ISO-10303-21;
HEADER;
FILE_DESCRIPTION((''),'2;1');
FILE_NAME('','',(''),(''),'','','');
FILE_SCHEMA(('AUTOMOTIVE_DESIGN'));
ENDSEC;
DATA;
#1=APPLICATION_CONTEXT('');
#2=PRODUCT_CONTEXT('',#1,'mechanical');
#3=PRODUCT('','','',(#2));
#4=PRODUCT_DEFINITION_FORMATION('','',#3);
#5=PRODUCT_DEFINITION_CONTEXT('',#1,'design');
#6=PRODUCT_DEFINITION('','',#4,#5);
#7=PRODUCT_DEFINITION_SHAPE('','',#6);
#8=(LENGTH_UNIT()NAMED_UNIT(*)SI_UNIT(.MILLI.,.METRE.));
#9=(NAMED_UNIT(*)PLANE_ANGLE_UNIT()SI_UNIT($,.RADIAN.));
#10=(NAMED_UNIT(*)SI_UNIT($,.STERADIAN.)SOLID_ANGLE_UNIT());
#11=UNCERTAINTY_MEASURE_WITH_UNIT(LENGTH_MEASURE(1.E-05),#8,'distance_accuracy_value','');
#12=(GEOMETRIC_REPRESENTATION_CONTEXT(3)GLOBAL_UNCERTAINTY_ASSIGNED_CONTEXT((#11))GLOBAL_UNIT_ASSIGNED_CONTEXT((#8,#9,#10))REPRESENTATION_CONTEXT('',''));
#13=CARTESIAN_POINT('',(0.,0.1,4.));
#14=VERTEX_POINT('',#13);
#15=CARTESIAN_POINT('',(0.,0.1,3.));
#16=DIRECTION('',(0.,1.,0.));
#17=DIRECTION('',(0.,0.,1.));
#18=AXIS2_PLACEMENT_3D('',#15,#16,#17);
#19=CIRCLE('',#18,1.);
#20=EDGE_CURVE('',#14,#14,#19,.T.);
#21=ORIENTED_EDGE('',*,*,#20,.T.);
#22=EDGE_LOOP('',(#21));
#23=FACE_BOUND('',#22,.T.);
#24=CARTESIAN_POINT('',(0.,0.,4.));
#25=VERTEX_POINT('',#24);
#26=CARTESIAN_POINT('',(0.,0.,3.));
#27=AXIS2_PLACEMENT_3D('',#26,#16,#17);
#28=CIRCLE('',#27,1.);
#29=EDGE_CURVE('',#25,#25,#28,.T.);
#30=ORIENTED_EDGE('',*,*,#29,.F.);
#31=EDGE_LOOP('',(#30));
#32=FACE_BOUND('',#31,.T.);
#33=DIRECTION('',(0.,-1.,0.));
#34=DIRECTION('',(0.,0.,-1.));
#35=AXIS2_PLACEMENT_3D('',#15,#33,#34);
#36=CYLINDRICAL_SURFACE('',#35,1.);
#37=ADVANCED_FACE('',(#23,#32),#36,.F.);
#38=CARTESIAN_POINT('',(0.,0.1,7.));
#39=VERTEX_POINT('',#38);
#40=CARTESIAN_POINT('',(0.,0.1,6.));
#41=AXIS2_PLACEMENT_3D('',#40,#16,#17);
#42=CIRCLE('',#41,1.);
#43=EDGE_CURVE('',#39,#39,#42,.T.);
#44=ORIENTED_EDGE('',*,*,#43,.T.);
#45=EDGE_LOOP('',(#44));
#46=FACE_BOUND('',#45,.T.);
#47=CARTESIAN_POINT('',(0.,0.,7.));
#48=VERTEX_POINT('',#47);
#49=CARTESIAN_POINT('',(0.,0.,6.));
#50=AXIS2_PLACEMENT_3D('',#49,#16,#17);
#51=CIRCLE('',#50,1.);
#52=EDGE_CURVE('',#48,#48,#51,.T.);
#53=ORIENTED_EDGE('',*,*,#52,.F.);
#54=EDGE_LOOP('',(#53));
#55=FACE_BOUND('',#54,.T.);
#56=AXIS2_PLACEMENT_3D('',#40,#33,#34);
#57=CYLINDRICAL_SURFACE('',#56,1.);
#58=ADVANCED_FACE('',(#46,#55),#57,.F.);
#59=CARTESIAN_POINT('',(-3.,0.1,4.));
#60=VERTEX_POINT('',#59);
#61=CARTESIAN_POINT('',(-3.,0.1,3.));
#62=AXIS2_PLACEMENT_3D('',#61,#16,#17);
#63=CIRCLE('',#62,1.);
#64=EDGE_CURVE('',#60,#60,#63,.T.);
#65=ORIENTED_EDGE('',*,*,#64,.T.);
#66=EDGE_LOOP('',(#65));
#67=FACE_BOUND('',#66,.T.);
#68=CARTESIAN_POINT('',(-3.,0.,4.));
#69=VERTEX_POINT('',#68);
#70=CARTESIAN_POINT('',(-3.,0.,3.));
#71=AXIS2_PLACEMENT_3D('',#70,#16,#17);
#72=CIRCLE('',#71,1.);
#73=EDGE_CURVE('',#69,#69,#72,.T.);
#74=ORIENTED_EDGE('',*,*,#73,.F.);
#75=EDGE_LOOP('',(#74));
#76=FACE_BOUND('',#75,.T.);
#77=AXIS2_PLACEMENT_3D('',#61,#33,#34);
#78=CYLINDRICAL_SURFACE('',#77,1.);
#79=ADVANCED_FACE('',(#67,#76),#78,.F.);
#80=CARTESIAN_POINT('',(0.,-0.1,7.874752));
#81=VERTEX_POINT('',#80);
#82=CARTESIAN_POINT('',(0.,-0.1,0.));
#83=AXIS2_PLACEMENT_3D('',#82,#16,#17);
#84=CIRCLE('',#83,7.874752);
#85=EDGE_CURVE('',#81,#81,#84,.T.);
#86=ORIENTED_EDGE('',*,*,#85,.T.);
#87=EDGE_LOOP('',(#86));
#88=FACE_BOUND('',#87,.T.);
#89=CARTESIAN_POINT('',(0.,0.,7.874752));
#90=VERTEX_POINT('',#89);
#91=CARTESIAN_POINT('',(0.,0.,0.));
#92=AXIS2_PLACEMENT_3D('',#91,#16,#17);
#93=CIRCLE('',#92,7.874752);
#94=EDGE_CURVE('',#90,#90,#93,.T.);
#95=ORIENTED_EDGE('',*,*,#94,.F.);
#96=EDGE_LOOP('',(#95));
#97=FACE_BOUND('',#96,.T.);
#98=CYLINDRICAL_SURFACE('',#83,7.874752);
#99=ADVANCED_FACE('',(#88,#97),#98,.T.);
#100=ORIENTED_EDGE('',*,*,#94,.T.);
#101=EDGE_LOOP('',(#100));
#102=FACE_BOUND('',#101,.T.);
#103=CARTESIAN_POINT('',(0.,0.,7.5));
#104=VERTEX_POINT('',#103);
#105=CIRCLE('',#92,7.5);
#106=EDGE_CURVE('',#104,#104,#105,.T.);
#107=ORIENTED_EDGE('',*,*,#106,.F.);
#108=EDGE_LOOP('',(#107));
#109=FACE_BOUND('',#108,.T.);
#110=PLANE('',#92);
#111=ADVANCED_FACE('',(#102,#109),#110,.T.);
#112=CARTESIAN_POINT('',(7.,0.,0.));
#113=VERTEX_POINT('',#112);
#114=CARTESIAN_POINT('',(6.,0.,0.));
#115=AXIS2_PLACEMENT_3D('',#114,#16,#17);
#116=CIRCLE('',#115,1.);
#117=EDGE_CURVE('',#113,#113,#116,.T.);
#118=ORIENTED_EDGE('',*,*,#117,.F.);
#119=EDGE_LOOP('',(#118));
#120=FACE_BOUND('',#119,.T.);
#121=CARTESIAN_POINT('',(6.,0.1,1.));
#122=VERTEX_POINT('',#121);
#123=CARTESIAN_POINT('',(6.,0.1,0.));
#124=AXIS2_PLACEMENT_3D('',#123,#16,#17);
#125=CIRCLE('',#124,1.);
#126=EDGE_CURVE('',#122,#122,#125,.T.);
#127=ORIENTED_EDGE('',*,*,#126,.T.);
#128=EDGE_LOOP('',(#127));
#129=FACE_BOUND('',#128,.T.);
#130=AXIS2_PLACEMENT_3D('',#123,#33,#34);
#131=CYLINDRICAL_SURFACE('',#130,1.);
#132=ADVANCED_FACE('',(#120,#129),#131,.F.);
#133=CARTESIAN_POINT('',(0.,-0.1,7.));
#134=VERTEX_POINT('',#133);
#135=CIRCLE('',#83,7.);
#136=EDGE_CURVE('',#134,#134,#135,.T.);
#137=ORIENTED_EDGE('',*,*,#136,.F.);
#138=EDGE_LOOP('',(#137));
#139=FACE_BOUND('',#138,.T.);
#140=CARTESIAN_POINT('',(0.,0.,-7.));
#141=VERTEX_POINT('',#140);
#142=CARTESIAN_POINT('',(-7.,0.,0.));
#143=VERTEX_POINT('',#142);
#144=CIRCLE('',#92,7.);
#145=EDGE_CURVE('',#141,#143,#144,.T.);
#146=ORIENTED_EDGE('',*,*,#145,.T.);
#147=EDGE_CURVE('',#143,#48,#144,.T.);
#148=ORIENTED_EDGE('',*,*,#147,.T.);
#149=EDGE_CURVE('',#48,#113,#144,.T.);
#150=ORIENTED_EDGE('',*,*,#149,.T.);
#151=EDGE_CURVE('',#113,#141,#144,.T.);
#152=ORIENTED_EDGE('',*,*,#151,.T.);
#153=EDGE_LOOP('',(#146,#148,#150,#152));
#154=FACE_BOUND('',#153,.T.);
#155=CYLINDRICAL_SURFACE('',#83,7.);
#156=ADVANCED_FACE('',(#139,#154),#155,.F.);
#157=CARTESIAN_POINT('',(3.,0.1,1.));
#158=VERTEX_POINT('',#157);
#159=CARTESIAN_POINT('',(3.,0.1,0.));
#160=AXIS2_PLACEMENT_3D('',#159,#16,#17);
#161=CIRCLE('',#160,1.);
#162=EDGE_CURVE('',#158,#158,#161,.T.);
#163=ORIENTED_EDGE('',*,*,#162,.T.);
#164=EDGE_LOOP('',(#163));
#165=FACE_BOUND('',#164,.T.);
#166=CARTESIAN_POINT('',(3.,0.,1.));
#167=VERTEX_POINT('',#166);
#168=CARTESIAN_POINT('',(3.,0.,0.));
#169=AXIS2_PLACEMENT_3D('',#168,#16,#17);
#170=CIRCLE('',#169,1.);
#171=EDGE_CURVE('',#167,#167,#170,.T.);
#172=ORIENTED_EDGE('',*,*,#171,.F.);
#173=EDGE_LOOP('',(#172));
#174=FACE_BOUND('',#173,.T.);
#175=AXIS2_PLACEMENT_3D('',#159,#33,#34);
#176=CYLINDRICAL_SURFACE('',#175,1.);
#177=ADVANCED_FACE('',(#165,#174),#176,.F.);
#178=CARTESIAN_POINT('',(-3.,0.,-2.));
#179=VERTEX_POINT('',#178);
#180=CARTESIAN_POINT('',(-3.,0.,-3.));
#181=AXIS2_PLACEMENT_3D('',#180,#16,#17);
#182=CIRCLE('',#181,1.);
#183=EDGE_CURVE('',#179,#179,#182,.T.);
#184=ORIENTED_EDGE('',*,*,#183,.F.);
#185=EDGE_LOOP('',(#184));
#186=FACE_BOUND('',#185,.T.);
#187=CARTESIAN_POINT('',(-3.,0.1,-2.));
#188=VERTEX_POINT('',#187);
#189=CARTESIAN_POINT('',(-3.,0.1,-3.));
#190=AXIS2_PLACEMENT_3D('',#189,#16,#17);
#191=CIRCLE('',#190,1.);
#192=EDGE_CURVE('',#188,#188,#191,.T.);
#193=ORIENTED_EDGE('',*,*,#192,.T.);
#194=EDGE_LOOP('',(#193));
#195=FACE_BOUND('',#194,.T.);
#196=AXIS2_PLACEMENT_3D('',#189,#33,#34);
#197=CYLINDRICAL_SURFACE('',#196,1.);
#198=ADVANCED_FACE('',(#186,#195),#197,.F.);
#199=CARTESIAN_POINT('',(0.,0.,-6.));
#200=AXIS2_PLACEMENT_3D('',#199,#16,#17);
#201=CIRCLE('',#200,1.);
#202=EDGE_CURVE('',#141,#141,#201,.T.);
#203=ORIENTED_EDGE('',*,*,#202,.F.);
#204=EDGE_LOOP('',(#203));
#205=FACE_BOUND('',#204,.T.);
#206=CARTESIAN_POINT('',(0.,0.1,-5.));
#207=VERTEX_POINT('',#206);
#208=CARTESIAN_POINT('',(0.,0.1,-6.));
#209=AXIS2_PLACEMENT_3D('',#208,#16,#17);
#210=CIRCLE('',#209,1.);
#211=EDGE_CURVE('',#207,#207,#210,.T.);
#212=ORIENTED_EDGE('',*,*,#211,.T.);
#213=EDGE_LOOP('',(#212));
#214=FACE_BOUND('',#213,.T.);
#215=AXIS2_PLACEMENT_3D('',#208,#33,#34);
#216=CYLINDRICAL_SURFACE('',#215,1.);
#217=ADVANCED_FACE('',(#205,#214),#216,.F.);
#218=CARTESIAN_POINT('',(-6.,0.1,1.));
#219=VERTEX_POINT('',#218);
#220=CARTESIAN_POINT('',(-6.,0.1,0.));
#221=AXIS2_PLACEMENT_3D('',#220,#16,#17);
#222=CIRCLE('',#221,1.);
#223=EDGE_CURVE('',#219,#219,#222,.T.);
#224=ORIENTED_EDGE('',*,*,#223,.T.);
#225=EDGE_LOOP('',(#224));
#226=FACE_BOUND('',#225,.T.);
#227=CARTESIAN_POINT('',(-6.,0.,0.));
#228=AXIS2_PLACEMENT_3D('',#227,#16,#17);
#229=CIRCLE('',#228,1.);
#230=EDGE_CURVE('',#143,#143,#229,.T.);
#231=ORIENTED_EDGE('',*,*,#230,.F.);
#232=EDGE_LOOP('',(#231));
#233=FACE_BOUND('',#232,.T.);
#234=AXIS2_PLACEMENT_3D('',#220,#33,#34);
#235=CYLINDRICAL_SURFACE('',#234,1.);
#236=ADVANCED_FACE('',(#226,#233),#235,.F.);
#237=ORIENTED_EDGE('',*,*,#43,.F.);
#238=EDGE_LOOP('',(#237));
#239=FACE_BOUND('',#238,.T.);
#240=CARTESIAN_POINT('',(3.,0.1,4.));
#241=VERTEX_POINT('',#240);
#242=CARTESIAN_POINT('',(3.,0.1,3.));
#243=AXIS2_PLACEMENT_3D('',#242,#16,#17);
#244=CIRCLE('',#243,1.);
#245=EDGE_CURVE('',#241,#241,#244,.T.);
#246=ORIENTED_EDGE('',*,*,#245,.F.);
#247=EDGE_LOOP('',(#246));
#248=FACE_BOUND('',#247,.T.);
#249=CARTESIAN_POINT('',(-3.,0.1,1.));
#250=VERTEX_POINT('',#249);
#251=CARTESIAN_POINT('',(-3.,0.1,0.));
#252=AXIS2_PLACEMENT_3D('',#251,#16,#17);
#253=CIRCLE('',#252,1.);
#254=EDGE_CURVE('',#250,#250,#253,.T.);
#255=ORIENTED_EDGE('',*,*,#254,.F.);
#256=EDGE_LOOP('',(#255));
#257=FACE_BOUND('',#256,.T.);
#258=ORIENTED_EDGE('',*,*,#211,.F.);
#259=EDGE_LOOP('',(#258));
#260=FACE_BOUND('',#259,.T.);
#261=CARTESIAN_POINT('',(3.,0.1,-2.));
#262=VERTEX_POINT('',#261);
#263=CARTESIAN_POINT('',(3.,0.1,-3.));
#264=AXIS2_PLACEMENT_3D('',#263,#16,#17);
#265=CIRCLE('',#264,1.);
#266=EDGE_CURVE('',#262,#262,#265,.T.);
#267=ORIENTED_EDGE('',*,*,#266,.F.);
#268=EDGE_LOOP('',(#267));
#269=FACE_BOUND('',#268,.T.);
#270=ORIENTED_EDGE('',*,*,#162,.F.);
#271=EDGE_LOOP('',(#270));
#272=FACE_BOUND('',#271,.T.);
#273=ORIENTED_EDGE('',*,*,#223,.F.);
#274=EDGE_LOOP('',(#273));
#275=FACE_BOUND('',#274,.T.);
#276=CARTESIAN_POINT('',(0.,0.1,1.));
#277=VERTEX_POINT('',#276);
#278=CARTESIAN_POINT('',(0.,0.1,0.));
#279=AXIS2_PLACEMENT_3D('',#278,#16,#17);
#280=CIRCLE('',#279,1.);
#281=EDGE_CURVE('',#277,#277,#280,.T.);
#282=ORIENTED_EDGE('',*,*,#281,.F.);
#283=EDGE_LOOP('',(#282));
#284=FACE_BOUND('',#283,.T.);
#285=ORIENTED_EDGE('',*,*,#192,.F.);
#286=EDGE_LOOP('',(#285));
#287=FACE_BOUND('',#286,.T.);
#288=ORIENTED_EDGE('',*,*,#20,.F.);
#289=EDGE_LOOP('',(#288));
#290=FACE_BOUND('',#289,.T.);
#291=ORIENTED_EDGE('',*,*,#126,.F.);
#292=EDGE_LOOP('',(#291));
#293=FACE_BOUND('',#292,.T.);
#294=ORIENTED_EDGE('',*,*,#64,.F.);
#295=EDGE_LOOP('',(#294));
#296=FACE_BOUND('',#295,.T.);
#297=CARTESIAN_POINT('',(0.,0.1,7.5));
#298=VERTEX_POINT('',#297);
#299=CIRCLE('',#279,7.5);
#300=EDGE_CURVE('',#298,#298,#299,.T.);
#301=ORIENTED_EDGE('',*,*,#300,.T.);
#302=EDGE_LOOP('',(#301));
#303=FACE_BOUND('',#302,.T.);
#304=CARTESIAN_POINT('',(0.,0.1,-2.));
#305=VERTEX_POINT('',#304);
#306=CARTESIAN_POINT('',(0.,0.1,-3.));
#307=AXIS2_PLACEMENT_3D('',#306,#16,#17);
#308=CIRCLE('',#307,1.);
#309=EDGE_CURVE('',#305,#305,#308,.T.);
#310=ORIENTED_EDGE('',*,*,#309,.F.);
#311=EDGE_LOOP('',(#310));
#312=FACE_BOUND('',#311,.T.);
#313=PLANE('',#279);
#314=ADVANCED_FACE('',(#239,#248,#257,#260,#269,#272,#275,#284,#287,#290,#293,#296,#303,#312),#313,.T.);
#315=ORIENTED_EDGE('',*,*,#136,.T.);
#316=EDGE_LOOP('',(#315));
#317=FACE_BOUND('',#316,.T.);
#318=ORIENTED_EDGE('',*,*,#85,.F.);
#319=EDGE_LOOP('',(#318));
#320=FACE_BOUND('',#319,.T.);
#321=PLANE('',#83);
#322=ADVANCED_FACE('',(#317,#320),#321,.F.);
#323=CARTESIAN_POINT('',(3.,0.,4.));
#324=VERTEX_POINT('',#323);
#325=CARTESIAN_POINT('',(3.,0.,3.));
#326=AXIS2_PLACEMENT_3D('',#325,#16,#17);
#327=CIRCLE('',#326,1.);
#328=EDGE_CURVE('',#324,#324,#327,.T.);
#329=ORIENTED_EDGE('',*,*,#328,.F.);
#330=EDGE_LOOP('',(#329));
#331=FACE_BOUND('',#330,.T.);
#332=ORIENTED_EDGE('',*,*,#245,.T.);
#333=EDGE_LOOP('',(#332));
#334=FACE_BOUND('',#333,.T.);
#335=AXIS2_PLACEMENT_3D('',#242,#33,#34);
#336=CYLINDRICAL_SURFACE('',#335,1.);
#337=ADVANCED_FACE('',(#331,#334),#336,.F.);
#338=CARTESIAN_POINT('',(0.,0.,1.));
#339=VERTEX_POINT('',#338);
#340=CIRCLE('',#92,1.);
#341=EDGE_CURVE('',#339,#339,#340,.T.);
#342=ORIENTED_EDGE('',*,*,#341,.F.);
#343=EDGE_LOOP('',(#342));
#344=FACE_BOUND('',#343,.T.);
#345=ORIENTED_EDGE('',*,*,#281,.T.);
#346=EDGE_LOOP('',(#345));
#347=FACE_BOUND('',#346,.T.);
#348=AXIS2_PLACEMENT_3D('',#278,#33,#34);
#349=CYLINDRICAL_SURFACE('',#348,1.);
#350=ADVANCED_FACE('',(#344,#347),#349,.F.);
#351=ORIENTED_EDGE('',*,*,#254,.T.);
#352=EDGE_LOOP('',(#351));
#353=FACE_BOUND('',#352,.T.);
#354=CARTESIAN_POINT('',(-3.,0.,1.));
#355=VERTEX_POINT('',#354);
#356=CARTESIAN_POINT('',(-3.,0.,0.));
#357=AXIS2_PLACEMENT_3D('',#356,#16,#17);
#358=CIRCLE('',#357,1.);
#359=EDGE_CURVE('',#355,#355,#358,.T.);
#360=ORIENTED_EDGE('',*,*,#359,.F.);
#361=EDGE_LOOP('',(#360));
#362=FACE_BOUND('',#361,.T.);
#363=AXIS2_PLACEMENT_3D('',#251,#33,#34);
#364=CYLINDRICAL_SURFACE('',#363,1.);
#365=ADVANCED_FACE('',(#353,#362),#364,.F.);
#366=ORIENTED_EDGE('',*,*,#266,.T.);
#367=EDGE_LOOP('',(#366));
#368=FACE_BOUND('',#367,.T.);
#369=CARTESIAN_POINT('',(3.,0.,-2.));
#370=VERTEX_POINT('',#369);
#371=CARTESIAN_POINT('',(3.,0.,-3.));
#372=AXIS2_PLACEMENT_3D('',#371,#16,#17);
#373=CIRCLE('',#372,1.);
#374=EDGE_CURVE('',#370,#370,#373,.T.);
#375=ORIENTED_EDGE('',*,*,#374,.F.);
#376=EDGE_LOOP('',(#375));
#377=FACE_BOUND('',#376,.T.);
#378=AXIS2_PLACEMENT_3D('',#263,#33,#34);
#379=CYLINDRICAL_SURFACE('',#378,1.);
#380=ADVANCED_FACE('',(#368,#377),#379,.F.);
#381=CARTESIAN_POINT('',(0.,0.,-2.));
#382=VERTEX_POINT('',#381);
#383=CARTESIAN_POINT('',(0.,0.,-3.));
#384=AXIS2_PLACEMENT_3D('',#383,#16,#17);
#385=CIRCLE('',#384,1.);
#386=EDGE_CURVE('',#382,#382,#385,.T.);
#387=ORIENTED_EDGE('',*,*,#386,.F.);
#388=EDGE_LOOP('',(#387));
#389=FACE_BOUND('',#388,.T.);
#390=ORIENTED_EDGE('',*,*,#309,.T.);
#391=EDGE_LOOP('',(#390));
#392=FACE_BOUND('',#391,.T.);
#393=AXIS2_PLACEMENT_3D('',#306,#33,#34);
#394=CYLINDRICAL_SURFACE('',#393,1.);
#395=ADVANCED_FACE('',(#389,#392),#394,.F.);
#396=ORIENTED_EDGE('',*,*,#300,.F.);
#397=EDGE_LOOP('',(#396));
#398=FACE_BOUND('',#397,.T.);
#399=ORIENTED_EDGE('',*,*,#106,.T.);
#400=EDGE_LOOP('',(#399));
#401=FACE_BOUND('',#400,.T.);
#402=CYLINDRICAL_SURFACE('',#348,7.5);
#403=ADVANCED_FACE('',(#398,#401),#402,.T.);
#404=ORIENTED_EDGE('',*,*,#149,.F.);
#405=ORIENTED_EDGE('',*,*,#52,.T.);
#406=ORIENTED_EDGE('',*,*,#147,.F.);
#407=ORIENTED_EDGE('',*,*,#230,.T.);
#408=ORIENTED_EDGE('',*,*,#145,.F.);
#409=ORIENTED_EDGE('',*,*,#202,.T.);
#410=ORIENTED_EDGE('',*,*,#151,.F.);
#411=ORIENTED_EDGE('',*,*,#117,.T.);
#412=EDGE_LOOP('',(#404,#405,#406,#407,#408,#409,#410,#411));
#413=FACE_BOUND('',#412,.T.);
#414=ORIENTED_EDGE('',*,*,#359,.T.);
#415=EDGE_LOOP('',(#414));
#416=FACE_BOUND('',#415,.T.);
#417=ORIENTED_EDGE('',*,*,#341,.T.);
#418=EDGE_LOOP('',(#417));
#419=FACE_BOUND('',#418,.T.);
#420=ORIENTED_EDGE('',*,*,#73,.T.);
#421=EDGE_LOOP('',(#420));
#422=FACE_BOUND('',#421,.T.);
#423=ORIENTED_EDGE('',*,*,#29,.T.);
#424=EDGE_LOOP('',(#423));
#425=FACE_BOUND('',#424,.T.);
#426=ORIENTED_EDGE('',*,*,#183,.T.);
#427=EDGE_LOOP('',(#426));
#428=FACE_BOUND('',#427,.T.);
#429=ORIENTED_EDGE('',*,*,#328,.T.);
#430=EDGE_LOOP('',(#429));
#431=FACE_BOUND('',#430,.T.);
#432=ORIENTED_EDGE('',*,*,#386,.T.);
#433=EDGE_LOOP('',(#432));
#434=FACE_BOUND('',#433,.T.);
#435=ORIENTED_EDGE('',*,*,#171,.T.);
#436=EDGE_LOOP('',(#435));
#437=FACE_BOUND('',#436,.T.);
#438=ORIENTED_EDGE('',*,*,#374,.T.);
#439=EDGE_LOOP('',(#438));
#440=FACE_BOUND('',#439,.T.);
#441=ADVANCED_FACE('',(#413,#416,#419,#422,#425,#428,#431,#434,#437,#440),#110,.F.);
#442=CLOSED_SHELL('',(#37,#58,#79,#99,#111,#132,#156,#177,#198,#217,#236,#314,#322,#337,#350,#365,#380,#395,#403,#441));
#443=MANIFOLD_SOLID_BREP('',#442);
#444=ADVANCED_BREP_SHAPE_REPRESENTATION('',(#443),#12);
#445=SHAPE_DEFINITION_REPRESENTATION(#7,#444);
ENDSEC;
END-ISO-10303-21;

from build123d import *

# Parameters (mm, degrees)
SKETCH2_R               = 7.5
BOSS_EXTRUDE1_DEPTH     = 0.1
SKETCH3_R               = 1
CUT_EXTRUDE2_DEPTH      = 11.607073112
FILL_PATTERN3_OUTLINE_R = 1
FILL_PATTERN3_DEPTH     = 0.1
SKETCH5_R               = 7.874751998
SKETCH5_R_2             = 7
BOSS_EXTRUDE2_DEPTH     = 0.1


# Read off the part's stored shape, not the designer's step: Fill Pattern3
with BuildPart() as part:
    # Sketch2 → Boss-Extrude1 (new body)
    with BuildSketch(Plane(origin=(0, 0, 0), x_dir=(1, 0, 0), z_dir=(0, 1, 0))):
        with Locations(Location((0, 0, 0), (0, 0, 270))):
            Circle(SKETCH2_R)
    extrude(amount=BOSS_EXTRUDE1_DEPTH)

    # Sketch3 → Cut-Extrude2 (cut, through all)
    with BuildSketch(Plane(origin=(0, 0, 0), x_dir=(1, 0, 0), z_dir=(0, 1, 0))):
        with Locations(Location((0, 0, 0), (0, 0, 270))):
            Circle(SKETCH3_R)
    extrude(amount=CUT_EXTRUDE2_DEPTH, mode=Mode.SUBTRACT)

    # Fill Pattern3 outline → Fill Pattern3 (cut)
    with BuildSketch(Plane(origin=(0, 0, 0), x_dir=(1, 0, 0), z_dir=(0, 1, 0))):
        with Locations((3, -3)):
            Circle(FILL_PATTERN3_OUTLINE_R)
        with Locations((0, -3)):
            Circle(FILL_PATTERN3_OUTLINE_R)
        with Locations((-3, -3)):
            Circle(FILL_PATTERN3_OUTLINE_R)
        with Locations((-3, 0)):
            Circle(FILL_PATTERN3_OUTLINE_R)
        with Locations((-3, 3)):
            Circle(FILL_PATTERN3_OUTLINE_R)
        with Locations((0, 3)):
            Circle(FILL_PATTERN3_OUTLINE_R)
        with Locations((6, 0)):
            Circle(FILL_PATTERN3_OUTLINE_R)
        with Locations((0, 6)):
            Circle(FILL_PATTERN3_OUTLINE_R)
        with Locations((-6, 0)):
            Circle(FILL_PATTERN3_OUTLINE_R)
        with Locations((0, -6)):
            Circle(FILL_PATTERN3_OUTLINE_R)
        with Locations((3, 0)):
            Circle(FILL_PATTERN3_OUTLINE_R)
        with Locations((3, 3)):
            Circle(FILL_PATTERN3_OUTLINE_R)
    extrude(amount=FILL_PATTERN3_DEPTH, mode=Mode.SUBTRACT)

    # Sketch5 → Boss-Extrude2 (add)
    with BuildSketch(Plane(origin=(0, 0, 0), x_dir=(1, 0, 0), z_dir=(0, 1, 0))):
        with Locations(Location((0, 0, 0), (0, 0, 270))):
            Circle(SKETCH5_R)
        with Locations(Location((0, 0, 0), (0, 0, 270))):
            Circle(SKETCH5_R_2, mode=Mode.SUBTRACT)
    extrude(amount=-BOSS_EXTRUDE2_DEPTH)


solid = part.part
